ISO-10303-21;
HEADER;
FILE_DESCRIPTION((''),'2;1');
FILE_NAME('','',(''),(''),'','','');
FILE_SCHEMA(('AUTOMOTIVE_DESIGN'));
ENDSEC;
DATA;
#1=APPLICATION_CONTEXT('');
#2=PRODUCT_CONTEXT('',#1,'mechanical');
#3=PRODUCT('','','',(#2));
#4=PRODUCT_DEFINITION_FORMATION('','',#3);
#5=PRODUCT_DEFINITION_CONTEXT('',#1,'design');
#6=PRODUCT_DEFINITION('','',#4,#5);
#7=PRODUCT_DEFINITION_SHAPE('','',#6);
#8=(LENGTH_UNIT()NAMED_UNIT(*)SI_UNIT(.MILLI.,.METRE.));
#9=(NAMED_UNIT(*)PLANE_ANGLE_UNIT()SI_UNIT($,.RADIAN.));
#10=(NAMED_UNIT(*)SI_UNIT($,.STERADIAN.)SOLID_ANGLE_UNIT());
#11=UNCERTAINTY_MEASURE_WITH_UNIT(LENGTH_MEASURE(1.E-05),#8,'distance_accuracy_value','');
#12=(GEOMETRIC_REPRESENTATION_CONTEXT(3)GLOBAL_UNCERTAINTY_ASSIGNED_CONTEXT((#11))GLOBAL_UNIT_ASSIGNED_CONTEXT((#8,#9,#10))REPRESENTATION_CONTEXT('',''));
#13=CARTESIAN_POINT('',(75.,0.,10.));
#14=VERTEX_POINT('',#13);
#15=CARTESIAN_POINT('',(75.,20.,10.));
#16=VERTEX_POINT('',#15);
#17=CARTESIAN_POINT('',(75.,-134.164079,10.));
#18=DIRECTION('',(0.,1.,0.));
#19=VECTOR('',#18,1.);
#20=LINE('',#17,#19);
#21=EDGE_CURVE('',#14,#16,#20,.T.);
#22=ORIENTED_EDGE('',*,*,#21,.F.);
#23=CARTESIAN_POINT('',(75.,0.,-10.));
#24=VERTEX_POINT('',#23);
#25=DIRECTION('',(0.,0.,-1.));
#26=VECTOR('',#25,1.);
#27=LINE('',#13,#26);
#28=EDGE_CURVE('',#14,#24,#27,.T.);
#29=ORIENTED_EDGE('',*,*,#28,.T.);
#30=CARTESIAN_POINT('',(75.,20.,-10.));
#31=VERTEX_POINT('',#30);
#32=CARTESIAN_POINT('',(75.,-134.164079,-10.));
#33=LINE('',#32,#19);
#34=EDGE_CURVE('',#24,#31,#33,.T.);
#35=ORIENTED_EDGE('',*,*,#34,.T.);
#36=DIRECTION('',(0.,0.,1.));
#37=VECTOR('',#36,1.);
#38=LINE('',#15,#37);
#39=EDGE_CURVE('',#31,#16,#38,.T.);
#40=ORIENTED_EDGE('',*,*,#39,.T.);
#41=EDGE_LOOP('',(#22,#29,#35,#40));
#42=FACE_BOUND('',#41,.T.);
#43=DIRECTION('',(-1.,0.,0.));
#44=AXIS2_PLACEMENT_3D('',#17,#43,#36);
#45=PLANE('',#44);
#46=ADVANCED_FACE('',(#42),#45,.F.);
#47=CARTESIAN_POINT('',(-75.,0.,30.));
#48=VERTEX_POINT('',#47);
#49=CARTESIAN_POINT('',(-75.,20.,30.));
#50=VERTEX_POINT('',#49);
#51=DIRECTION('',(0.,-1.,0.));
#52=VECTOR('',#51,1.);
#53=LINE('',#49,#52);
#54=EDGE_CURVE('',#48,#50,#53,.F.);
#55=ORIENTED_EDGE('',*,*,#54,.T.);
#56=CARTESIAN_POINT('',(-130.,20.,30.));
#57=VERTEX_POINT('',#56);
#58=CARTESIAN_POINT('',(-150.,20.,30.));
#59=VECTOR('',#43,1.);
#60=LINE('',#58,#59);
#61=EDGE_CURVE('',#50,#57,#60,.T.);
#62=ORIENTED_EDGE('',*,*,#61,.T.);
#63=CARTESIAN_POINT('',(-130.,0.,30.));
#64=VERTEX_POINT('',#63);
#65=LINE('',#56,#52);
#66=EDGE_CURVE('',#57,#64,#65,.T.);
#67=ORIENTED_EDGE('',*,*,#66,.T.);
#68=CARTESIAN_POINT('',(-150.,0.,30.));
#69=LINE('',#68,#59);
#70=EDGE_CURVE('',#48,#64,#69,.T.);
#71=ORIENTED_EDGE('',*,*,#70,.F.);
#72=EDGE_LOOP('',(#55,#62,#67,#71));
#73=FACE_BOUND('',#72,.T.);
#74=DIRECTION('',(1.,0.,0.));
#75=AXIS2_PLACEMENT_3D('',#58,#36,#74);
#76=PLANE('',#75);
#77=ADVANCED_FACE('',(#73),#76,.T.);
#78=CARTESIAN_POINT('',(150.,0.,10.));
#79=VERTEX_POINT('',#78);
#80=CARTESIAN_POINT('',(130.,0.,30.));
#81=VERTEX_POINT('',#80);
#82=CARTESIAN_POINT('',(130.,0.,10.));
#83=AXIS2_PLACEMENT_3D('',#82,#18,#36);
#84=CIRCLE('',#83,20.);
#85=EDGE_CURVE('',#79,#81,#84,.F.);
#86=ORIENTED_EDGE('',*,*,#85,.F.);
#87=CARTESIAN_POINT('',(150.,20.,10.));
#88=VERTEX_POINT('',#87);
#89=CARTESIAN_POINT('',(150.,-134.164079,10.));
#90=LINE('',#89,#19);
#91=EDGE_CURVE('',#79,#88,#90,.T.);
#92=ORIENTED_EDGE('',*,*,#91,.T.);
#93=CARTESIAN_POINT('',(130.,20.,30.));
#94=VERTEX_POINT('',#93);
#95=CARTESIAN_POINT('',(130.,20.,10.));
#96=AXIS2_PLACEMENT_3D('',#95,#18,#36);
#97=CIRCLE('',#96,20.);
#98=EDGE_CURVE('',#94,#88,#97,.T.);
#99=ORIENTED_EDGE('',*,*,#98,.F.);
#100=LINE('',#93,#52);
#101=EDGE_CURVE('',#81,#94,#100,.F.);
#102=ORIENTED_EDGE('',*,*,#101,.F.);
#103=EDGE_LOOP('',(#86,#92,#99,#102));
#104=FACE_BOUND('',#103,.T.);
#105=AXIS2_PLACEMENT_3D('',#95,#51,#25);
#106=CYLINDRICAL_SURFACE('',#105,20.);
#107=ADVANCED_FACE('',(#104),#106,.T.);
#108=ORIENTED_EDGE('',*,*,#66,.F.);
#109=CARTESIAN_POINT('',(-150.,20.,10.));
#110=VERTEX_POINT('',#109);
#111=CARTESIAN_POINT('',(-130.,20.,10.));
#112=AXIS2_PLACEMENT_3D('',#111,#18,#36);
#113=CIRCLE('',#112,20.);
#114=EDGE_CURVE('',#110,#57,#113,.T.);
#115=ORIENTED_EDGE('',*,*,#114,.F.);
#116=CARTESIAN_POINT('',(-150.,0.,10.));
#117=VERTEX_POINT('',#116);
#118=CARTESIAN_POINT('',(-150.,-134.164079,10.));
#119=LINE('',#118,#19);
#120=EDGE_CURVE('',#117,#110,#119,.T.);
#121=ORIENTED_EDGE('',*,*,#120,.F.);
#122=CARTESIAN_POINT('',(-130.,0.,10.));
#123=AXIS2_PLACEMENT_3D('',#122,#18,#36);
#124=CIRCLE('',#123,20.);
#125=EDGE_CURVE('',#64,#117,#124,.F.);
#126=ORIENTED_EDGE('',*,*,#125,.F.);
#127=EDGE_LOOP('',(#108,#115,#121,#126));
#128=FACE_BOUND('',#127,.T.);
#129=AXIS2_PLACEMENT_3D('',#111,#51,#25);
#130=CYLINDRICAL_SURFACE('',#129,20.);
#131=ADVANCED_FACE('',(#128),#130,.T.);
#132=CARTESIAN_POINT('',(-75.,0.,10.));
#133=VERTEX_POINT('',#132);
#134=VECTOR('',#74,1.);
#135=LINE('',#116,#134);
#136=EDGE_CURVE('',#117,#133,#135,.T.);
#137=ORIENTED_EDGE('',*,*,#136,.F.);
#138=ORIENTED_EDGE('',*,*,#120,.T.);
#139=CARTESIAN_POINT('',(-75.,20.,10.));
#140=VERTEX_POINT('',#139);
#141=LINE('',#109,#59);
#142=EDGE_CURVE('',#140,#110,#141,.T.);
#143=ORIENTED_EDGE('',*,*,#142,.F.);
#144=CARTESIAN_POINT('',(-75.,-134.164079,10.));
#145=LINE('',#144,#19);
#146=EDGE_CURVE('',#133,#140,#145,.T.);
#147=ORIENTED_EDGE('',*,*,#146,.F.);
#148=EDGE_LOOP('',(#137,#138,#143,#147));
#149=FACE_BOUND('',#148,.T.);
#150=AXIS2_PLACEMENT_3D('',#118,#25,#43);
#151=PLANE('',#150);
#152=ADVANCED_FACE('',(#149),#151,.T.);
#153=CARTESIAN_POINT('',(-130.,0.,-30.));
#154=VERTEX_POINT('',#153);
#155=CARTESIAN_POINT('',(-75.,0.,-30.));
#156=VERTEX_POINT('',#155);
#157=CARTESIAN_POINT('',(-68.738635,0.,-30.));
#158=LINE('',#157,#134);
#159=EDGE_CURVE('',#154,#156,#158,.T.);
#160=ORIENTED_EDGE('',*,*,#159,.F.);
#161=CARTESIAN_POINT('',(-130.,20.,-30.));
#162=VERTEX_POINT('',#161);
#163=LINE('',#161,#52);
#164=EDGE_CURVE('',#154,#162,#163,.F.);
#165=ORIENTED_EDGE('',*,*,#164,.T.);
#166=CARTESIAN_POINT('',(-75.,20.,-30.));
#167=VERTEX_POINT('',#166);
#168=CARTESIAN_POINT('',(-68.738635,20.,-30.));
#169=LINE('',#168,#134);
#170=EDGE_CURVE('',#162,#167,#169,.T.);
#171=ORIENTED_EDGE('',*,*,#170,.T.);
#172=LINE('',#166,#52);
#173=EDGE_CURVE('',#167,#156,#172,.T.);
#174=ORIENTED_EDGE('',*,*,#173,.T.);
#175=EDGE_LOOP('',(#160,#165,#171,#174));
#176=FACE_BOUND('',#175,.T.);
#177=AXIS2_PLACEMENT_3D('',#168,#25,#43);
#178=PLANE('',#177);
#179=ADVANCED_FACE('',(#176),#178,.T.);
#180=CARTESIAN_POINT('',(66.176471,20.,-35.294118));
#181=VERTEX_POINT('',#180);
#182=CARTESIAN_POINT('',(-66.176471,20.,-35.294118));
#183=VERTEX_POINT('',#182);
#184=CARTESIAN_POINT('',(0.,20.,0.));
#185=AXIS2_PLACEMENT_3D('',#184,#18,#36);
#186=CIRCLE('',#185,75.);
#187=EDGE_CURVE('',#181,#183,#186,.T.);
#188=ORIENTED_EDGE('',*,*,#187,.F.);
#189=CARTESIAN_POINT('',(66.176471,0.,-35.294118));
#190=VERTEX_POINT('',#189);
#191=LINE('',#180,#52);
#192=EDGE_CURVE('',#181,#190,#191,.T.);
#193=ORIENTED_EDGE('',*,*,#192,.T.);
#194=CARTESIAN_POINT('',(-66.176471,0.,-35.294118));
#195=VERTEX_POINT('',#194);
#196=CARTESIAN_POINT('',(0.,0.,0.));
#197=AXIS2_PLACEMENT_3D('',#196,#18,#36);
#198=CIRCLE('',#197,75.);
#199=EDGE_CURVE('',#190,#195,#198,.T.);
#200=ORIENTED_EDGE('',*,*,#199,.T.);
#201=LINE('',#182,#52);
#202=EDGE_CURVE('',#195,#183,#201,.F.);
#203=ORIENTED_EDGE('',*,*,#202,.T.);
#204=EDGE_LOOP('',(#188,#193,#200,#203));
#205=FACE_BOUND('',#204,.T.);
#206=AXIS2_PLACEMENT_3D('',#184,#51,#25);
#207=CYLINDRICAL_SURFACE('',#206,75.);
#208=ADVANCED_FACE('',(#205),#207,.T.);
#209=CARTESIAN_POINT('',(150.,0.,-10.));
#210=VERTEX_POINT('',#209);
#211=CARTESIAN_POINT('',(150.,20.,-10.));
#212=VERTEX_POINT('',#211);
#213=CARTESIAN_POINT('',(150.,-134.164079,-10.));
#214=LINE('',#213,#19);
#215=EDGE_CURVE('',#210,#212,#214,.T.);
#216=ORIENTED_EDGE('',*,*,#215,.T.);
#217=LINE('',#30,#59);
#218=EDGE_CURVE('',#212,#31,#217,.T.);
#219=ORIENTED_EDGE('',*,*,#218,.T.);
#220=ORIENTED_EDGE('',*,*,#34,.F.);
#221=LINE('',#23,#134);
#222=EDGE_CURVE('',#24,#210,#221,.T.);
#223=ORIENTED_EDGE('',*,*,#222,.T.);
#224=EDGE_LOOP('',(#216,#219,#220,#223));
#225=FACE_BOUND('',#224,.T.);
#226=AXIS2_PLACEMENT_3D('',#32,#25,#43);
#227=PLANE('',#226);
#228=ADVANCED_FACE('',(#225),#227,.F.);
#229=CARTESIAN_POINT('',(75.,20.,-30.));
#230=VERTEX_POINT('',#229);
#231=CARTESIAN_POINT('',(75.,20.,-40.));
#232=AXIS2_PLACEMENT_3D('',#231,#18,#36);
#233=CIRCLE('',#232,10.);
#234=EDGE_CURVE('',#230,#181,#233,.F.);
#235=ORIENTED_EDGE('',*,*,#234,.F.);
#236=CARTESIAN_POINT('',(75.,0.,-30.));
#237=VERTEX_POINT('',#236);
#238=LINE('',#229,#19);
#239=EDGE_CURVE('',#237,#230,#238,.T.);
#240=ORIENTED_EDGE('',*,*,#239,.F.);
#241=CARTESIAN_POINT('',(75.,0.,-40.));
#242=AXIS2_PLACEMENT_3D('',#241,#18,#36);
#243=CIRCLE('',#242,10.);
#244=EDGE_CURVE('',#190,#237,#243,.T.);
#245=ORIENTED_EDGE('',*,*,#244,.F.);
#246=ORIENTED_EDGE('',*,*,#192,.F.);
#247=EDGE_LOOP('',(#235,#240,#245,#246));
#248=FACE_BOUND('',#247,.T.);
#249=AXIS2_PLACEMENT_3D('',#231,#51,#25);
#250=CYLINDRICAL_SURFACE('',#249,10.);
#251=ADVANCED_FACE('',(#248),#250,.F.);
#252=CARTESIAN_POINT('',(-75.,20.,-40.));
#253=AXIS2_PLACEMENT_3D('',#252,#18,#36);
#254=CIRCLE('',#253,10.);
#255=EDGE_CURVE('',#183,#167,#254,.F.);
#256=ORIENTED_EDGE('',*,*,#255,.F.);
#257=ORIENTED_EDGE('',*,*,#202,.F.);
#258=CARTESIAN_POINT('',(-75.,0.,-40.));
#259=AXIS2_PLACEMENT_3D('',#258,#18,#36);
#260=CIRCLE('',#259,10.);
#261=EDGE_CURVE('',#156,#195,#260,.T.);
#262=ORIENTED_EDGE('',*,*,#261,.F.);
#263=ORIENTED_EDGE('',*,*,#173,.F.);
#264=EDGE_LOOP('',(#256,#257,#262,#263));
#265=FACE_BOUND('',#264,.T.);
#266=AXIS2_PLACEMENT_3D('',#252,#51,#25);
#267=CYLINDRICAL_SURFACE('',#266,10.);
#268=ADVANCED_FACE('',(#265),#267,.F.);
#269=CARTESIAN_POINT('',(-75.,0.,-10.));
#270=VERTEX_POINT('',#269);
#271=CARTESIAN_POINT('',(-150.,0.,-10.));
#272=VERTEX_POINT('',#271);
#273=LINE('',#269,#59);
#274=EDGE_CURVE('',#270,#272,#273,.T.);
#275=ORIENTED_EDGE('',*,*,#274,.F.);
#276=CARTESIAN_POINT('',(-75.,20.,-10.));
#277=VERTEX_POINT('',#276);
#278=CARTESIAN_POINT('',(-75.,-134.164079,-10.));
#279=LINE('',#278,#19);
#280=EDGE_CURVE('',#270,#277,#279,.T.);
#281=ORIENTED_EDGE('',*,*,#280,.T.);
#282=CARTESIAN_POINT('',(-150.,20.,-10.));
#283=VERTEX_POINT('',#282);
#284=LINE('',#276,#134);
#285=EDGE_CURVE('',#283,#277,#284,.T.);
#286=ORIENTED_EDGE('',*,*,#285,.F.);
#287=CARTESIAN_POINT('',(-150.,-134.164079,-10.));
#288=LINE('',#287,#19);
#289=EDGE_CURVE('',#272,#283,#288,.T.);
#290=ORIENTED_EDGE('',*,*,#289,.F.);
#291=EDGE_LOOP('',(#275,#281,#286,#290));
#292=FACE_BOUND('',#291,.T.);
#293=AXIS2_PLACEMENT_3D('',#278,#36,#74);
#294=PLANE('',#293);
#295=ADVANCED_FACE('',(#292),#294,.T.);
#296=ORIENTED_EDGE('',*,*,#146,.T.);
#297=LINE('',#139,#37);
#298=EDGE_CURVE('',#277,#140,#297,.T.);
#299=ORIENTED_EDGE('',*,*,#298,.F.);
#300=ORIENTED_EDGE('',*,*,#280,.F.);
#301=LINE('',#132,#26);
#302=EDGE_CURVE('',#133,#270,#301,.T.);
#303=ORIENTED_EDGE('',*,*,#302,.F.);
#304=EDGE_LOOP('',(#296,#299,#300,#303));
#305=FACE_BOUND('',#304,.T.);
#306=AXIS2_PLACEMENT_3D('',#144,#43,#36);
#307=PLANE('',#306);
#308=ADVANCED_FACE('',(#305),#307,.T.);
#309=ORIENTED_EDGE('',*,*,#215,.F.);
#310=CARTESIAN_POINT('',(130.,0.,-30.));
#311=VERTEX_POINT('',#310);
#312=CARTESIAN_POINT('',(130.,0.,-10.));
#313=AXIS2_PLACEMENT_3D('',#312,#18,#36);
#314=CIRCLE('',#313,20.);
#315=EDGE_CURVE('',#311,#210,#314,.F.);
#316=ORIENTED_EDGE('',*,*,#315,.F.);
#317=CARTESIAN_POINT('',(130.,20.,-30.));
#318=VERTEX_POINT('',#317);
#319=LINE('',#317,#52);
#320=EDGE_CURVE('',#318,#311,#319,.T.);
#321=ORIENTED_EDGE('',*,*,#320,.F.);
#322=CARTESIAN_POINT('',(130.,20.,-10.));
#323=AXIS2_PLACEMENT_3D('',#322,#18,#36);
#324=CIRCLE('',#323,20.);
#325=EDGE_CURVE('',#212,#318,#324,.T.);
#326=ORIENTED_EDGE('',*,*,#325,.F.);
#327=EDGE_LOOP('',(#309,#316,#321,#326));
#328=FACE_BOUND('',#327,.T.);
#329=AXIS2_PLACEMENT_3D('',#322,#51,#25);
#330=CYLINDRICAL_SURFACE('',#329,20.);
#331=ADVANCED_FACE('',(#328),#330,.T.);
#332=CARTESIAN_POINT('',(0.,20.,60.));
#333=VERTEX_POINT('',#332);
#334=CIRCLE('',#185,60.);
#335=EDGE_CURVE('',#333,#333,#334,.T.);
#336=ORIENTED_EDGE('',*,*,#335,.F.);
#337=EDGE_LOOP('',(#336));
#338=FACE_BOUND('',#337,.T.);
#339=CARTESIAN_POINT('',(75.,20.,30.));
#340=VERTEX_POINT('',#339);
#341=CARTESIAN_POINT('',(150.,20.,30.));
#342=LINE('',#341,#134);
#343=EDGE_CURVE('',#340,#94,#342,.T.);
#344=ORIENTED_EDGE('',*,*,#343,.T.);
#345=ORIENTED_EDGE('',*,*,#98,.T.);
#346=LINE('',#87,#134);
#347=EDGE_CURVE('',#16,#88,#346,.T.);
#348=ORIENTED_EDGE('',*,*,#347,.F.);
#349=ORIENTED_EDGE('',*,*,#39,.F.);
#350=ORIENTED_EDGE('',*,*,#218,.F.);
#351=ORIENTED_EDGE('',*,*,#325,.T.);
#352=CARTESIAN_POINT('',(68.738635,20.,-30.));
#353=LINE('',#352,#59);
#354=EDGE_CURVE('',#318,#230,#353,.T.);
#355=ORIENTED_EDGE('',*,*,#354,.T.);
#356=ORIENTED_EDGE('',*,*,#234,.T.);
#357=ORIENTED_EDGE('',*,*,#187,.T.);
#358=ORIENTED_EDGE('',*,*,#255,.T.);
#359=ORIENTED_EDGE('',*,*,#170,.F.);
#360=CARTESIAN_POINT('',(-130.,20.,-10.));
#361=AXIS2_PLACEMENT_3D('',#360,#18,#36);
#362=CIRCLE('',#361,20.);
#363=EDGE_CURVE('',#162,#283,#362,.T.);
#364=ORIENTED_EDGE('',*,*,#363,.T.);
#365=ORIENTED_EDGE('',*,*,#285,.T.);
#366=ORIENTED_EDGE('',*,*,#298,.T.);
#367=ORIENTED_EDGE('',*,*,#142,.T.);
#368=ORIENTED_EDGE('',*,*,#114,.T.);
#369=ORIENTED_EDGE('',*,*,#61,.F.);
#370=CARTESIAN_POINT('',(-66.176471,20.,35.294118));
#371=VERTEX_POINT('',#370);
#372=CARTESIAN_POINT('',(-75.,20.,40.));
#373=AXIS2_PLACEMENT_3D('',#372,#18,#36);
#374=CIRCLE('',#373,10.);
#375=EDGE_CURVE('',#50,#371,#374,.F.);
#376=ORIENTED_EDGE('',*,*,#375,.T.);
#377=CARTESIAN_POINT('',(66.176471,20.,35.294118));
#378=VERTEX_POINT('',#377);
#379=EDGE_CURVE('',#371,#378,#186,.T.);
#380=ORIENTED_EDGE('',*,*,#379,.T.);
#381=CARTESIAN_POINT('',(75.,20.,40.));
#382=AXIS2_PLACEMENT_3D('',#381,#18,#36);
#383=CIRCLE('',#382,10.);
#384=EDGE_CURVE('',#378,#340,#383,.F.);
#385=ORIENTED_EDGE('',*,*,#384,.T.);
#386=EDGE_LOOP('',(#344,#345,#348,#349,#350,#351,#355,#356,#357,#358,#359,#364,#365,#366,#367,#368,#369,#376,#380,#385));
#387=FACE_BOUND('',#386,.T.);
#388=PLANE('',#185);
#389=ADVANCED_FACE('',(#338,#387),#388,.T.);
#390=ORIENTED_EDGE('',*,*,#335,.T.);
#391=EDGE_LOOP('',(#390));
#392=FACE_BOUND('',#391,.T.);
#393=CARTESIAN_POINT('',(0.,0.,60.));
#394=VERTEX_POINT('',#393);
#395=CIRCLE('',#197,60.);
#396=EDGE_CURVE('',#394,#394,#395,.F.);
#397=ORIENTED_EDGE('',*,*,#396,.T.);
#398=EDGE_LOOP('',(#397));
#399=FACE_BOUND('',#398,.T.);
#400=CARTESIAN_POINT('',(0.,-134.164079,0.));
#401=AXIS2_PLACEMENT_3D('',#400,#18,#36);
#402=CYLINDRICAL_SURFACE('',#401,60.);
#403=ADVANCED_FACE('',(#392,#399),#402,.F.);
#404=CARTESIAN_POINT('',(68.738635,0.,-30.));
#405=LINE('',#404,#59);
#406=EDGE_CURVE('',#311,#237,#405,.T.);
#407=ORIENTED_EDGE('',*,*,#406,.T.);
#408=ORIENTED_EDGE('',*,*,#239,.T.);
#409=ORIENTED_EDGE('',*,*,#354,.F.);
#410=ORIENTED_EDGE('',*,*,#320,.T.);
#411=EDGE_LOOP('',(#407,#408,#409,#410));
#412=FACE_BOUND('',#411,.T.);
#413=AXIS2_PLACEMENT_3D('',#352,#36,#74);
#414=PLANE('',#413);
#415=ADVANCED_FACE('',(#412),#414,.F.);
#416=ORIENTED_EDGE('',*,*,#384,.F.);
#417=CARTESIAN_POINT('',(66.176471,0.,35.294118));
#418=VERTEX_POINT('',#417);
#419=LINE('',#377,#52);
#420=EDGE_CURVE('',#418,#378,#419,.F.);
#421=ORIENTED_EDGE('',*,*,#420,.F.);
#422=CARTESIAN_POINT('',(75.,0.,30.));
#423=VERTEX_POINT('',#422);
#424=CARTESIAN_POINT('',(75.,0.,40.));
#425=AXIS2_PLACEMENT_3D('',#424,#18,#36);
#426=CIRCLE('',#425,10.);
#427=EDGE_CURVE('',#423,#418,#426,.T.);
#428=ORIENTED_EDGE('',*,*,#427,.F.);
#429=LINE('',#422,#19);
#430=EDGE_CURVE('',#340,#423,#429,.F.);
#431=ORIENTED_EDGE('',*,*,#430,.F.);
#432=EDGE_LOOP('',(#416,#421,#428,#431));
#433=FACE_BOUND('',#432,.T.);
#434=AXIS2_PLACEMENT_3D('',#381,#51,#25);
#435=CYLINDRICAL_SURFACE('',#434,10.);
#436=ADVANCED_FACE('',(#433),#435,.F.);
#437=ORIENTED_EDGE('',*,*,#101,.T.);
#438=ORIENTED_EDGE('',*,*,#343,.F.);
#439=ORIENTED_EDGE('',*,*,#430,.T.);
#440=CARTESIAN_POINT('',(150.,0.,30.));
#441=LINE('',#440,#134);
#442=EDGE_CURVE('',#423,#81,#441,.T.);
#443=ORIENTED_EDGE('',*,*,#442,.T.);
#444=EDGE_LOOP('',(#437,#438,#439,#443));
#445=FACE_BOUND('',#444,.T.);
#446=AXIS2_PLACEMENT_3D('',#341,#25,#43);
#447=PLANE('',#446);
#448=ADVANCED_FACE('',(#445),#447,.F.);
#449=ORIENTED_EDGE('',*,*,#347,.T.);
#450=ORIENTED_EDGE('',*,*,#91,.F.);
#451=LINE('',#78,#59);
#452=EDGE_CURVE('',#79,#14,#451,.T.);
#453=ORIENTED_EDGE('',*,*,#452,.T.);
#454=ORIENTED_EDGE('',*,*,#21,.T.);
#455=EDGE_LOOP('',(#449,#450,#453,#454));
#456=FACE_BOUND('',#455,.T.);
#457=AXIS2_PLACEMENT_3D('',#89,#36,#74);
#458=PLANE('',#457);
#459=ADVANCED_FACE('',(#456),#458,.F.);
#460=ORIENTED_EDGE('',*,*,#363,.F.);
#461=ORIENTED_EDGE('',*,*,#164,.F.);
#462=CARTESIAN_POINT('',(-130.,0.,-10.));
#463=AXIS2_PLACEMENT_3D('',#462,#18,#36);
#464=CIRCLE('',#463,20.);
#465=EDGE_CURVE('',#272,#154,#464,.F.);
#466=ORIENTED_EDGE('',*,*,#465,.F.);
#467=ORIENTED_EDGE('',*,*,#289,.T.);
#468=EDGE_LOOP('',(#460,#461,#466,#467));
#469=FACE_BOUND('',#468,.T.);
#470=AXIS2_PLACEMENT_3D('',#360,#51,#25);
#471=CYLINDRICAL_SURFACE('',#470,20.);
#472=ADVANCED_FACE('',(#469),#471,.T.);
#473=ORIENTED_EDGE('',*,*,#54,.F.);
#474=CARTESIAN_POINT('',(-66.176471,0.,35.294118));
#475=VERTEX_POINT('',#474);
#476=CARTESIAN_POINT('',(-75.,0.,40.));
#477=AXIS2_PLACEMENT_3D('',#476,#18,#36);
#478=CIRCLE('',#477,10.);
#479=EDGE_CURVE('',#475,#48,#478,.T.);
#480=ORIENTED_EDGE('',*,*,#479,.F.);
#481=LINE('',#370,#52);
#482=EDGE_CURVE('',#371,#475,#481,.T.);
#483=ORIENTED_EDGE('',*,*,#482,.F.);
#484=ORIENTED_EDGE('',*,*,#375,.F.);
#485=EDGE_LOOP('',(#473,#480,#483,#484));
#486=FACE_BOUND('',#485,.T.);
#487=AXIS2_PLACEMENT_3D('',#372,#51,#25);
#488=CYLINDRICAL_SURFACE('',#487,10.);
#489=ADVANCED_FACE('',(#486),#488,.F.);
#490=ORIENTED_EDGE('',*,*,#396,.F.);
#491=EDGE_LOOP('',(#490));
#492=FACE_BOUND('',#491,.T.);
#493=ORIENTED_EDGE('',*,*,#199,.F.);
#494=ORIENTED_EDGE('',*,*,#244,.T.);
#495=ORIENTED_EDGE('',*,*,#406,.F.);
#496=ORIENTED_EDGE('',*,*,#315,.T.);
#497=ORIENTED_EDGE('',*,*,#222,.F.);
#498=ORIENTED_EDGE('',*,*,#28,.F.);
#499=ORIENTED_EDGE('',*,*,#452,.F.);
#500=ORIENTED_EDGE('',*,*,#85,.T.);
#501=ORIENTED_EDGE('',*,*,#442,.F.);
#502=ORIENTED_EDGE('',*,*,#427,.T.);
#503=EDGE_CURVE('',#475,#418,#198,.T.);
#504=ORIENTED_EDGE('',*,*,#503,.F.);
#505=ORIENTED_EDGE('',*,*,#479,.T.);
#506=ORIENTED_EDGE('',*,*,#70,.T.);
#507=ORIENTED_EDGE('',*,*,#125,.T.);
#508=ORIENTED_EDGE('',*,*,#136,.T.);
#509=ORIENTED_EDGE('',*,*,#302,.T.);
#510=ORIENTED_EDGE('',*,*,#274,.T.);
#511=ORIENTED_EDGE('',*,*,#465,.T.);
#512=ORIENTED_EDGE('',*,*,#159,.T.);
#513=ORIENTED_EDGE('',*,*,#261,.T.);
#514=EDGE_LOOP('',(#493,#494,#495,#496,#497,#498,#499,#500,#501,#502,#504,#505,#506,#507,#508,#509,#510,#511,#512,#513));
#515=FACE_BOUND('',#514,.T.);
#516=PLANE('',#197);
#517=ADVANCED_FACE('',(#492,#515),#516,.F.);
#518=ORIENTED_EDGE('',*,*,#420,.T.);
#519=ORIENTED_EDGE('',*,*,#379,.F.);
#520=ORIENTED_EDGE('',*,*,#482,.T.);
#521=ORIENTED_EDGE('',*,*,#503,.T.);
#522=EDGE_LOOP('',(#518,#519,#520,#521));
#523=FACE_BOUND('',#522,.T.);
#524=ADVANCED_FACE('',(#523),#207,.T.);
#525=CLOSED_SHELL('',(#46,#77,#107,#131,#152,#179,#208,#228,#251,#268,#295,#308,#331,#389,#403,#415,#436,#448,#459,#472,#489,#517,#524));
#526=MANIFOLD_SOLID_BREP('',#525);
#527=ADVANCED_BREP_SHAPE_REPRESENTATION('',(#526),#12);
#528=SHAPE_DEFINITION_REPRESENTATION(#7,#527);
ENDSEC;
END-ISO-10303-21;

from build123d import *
from build123d.topology import SkipClean

# Parameters (mm, degrees)
BOSS_EXTRUDE1_DEPTH = 20
SKETCH2_W           = 75
SKETCH2_H           = 20
CUT_EXTRUDE1_DEPTH  = 20
FILLET1_R           = 10
FILLET2_R           = 20


with BuildPart() as part:
    # Sketch1 → Boss-Extrude1 (new body)
    with BuildSketch(Plane(origin=(0, 0, 0), x_dir=(1, 0, 0), z_dir=(0, 1, 0))):
        with BuildLine():
            Line((68.738635424, 30), (150, 30))
            Line((150, 30), (150, -30))
            Line((150, -30), (68.738635424, -30))
            ThreePointArc((68.738635424, -30), (41.079191813, -62.74950199), (0, -75))
            Line((0, -75), (0, 75))
            ThreePointArc((0, 75), (41.079191813, 62.74950199), (68.738635424, 30))
        make_face()
    boss_extrude1 = extrude(amount=BOSS_EXTRUDE1_DEPTH)

    # Sketch2 → Cut-Extrude1 (cut)
    with BuildSketch(Plane(origin=(0, 20, 0), x_dir=(1, 0, 0), z_dir=(0, 1, 0))):
        with BuildLine():
            Line((0, 60), (0, -60))
            ThreePointArc((0, -60), (60, 0), (0, 60))
        make_face()
        with Locations((112.5, 0)):
            Rectangle(SKETCH2_W, SKETCH2_H)
    cut_extrude1 = extrude(amount=-CUT_EXTRUDE1_DEPTH, mode=Mode.SUBTRACT)

    # Mirror1: Boss-Extrude1, Cut-Extrude1 across plane
    with SkipClean():  # the faces are left unmerged after this step: merging them gives an invalid solid
        add(boss_extrude1.mirror(Plane(origin=(0, 0, 0), x_dir=(0, 0, 1), z_dir=(1, 0, 0))))
        add(cut_extrude1.mirror(Plane(origin=(0, 0, 0), x_dir=(0, 0, 1), z_dir=(1, 0, 0))), mode=Mode.SUBTRACT)
    add(part.part.scale(1), mode=Mode.REPLACE)  # the faces are merged on a copy

    # Fillet1
    fillet1_edges = [part.edges().sort_by_distance(p)[0] for p in [
        (68.738635424, 10, -30),
        (68.738635424, 10, 30),
        (-68.738635424, 10, -30),
        (-68.738635424, 10, 30),
    ]]
    fillet(fillet1_edges, radius=FILLET1_R)

    # Fillet2
    fillet2_edges = [part.edges().sort_by_distance(p)[0] for p in [
        (-150, 10, 30),
        (-150, 10, -30),
        (150, 10, -30),
        (150, 10, 30),
    ]]
    fillet(fillet2_edges, radius=FILLET2_R - 0.0001)  # a hair under: the kernel refuses the full size


solid = part.part
